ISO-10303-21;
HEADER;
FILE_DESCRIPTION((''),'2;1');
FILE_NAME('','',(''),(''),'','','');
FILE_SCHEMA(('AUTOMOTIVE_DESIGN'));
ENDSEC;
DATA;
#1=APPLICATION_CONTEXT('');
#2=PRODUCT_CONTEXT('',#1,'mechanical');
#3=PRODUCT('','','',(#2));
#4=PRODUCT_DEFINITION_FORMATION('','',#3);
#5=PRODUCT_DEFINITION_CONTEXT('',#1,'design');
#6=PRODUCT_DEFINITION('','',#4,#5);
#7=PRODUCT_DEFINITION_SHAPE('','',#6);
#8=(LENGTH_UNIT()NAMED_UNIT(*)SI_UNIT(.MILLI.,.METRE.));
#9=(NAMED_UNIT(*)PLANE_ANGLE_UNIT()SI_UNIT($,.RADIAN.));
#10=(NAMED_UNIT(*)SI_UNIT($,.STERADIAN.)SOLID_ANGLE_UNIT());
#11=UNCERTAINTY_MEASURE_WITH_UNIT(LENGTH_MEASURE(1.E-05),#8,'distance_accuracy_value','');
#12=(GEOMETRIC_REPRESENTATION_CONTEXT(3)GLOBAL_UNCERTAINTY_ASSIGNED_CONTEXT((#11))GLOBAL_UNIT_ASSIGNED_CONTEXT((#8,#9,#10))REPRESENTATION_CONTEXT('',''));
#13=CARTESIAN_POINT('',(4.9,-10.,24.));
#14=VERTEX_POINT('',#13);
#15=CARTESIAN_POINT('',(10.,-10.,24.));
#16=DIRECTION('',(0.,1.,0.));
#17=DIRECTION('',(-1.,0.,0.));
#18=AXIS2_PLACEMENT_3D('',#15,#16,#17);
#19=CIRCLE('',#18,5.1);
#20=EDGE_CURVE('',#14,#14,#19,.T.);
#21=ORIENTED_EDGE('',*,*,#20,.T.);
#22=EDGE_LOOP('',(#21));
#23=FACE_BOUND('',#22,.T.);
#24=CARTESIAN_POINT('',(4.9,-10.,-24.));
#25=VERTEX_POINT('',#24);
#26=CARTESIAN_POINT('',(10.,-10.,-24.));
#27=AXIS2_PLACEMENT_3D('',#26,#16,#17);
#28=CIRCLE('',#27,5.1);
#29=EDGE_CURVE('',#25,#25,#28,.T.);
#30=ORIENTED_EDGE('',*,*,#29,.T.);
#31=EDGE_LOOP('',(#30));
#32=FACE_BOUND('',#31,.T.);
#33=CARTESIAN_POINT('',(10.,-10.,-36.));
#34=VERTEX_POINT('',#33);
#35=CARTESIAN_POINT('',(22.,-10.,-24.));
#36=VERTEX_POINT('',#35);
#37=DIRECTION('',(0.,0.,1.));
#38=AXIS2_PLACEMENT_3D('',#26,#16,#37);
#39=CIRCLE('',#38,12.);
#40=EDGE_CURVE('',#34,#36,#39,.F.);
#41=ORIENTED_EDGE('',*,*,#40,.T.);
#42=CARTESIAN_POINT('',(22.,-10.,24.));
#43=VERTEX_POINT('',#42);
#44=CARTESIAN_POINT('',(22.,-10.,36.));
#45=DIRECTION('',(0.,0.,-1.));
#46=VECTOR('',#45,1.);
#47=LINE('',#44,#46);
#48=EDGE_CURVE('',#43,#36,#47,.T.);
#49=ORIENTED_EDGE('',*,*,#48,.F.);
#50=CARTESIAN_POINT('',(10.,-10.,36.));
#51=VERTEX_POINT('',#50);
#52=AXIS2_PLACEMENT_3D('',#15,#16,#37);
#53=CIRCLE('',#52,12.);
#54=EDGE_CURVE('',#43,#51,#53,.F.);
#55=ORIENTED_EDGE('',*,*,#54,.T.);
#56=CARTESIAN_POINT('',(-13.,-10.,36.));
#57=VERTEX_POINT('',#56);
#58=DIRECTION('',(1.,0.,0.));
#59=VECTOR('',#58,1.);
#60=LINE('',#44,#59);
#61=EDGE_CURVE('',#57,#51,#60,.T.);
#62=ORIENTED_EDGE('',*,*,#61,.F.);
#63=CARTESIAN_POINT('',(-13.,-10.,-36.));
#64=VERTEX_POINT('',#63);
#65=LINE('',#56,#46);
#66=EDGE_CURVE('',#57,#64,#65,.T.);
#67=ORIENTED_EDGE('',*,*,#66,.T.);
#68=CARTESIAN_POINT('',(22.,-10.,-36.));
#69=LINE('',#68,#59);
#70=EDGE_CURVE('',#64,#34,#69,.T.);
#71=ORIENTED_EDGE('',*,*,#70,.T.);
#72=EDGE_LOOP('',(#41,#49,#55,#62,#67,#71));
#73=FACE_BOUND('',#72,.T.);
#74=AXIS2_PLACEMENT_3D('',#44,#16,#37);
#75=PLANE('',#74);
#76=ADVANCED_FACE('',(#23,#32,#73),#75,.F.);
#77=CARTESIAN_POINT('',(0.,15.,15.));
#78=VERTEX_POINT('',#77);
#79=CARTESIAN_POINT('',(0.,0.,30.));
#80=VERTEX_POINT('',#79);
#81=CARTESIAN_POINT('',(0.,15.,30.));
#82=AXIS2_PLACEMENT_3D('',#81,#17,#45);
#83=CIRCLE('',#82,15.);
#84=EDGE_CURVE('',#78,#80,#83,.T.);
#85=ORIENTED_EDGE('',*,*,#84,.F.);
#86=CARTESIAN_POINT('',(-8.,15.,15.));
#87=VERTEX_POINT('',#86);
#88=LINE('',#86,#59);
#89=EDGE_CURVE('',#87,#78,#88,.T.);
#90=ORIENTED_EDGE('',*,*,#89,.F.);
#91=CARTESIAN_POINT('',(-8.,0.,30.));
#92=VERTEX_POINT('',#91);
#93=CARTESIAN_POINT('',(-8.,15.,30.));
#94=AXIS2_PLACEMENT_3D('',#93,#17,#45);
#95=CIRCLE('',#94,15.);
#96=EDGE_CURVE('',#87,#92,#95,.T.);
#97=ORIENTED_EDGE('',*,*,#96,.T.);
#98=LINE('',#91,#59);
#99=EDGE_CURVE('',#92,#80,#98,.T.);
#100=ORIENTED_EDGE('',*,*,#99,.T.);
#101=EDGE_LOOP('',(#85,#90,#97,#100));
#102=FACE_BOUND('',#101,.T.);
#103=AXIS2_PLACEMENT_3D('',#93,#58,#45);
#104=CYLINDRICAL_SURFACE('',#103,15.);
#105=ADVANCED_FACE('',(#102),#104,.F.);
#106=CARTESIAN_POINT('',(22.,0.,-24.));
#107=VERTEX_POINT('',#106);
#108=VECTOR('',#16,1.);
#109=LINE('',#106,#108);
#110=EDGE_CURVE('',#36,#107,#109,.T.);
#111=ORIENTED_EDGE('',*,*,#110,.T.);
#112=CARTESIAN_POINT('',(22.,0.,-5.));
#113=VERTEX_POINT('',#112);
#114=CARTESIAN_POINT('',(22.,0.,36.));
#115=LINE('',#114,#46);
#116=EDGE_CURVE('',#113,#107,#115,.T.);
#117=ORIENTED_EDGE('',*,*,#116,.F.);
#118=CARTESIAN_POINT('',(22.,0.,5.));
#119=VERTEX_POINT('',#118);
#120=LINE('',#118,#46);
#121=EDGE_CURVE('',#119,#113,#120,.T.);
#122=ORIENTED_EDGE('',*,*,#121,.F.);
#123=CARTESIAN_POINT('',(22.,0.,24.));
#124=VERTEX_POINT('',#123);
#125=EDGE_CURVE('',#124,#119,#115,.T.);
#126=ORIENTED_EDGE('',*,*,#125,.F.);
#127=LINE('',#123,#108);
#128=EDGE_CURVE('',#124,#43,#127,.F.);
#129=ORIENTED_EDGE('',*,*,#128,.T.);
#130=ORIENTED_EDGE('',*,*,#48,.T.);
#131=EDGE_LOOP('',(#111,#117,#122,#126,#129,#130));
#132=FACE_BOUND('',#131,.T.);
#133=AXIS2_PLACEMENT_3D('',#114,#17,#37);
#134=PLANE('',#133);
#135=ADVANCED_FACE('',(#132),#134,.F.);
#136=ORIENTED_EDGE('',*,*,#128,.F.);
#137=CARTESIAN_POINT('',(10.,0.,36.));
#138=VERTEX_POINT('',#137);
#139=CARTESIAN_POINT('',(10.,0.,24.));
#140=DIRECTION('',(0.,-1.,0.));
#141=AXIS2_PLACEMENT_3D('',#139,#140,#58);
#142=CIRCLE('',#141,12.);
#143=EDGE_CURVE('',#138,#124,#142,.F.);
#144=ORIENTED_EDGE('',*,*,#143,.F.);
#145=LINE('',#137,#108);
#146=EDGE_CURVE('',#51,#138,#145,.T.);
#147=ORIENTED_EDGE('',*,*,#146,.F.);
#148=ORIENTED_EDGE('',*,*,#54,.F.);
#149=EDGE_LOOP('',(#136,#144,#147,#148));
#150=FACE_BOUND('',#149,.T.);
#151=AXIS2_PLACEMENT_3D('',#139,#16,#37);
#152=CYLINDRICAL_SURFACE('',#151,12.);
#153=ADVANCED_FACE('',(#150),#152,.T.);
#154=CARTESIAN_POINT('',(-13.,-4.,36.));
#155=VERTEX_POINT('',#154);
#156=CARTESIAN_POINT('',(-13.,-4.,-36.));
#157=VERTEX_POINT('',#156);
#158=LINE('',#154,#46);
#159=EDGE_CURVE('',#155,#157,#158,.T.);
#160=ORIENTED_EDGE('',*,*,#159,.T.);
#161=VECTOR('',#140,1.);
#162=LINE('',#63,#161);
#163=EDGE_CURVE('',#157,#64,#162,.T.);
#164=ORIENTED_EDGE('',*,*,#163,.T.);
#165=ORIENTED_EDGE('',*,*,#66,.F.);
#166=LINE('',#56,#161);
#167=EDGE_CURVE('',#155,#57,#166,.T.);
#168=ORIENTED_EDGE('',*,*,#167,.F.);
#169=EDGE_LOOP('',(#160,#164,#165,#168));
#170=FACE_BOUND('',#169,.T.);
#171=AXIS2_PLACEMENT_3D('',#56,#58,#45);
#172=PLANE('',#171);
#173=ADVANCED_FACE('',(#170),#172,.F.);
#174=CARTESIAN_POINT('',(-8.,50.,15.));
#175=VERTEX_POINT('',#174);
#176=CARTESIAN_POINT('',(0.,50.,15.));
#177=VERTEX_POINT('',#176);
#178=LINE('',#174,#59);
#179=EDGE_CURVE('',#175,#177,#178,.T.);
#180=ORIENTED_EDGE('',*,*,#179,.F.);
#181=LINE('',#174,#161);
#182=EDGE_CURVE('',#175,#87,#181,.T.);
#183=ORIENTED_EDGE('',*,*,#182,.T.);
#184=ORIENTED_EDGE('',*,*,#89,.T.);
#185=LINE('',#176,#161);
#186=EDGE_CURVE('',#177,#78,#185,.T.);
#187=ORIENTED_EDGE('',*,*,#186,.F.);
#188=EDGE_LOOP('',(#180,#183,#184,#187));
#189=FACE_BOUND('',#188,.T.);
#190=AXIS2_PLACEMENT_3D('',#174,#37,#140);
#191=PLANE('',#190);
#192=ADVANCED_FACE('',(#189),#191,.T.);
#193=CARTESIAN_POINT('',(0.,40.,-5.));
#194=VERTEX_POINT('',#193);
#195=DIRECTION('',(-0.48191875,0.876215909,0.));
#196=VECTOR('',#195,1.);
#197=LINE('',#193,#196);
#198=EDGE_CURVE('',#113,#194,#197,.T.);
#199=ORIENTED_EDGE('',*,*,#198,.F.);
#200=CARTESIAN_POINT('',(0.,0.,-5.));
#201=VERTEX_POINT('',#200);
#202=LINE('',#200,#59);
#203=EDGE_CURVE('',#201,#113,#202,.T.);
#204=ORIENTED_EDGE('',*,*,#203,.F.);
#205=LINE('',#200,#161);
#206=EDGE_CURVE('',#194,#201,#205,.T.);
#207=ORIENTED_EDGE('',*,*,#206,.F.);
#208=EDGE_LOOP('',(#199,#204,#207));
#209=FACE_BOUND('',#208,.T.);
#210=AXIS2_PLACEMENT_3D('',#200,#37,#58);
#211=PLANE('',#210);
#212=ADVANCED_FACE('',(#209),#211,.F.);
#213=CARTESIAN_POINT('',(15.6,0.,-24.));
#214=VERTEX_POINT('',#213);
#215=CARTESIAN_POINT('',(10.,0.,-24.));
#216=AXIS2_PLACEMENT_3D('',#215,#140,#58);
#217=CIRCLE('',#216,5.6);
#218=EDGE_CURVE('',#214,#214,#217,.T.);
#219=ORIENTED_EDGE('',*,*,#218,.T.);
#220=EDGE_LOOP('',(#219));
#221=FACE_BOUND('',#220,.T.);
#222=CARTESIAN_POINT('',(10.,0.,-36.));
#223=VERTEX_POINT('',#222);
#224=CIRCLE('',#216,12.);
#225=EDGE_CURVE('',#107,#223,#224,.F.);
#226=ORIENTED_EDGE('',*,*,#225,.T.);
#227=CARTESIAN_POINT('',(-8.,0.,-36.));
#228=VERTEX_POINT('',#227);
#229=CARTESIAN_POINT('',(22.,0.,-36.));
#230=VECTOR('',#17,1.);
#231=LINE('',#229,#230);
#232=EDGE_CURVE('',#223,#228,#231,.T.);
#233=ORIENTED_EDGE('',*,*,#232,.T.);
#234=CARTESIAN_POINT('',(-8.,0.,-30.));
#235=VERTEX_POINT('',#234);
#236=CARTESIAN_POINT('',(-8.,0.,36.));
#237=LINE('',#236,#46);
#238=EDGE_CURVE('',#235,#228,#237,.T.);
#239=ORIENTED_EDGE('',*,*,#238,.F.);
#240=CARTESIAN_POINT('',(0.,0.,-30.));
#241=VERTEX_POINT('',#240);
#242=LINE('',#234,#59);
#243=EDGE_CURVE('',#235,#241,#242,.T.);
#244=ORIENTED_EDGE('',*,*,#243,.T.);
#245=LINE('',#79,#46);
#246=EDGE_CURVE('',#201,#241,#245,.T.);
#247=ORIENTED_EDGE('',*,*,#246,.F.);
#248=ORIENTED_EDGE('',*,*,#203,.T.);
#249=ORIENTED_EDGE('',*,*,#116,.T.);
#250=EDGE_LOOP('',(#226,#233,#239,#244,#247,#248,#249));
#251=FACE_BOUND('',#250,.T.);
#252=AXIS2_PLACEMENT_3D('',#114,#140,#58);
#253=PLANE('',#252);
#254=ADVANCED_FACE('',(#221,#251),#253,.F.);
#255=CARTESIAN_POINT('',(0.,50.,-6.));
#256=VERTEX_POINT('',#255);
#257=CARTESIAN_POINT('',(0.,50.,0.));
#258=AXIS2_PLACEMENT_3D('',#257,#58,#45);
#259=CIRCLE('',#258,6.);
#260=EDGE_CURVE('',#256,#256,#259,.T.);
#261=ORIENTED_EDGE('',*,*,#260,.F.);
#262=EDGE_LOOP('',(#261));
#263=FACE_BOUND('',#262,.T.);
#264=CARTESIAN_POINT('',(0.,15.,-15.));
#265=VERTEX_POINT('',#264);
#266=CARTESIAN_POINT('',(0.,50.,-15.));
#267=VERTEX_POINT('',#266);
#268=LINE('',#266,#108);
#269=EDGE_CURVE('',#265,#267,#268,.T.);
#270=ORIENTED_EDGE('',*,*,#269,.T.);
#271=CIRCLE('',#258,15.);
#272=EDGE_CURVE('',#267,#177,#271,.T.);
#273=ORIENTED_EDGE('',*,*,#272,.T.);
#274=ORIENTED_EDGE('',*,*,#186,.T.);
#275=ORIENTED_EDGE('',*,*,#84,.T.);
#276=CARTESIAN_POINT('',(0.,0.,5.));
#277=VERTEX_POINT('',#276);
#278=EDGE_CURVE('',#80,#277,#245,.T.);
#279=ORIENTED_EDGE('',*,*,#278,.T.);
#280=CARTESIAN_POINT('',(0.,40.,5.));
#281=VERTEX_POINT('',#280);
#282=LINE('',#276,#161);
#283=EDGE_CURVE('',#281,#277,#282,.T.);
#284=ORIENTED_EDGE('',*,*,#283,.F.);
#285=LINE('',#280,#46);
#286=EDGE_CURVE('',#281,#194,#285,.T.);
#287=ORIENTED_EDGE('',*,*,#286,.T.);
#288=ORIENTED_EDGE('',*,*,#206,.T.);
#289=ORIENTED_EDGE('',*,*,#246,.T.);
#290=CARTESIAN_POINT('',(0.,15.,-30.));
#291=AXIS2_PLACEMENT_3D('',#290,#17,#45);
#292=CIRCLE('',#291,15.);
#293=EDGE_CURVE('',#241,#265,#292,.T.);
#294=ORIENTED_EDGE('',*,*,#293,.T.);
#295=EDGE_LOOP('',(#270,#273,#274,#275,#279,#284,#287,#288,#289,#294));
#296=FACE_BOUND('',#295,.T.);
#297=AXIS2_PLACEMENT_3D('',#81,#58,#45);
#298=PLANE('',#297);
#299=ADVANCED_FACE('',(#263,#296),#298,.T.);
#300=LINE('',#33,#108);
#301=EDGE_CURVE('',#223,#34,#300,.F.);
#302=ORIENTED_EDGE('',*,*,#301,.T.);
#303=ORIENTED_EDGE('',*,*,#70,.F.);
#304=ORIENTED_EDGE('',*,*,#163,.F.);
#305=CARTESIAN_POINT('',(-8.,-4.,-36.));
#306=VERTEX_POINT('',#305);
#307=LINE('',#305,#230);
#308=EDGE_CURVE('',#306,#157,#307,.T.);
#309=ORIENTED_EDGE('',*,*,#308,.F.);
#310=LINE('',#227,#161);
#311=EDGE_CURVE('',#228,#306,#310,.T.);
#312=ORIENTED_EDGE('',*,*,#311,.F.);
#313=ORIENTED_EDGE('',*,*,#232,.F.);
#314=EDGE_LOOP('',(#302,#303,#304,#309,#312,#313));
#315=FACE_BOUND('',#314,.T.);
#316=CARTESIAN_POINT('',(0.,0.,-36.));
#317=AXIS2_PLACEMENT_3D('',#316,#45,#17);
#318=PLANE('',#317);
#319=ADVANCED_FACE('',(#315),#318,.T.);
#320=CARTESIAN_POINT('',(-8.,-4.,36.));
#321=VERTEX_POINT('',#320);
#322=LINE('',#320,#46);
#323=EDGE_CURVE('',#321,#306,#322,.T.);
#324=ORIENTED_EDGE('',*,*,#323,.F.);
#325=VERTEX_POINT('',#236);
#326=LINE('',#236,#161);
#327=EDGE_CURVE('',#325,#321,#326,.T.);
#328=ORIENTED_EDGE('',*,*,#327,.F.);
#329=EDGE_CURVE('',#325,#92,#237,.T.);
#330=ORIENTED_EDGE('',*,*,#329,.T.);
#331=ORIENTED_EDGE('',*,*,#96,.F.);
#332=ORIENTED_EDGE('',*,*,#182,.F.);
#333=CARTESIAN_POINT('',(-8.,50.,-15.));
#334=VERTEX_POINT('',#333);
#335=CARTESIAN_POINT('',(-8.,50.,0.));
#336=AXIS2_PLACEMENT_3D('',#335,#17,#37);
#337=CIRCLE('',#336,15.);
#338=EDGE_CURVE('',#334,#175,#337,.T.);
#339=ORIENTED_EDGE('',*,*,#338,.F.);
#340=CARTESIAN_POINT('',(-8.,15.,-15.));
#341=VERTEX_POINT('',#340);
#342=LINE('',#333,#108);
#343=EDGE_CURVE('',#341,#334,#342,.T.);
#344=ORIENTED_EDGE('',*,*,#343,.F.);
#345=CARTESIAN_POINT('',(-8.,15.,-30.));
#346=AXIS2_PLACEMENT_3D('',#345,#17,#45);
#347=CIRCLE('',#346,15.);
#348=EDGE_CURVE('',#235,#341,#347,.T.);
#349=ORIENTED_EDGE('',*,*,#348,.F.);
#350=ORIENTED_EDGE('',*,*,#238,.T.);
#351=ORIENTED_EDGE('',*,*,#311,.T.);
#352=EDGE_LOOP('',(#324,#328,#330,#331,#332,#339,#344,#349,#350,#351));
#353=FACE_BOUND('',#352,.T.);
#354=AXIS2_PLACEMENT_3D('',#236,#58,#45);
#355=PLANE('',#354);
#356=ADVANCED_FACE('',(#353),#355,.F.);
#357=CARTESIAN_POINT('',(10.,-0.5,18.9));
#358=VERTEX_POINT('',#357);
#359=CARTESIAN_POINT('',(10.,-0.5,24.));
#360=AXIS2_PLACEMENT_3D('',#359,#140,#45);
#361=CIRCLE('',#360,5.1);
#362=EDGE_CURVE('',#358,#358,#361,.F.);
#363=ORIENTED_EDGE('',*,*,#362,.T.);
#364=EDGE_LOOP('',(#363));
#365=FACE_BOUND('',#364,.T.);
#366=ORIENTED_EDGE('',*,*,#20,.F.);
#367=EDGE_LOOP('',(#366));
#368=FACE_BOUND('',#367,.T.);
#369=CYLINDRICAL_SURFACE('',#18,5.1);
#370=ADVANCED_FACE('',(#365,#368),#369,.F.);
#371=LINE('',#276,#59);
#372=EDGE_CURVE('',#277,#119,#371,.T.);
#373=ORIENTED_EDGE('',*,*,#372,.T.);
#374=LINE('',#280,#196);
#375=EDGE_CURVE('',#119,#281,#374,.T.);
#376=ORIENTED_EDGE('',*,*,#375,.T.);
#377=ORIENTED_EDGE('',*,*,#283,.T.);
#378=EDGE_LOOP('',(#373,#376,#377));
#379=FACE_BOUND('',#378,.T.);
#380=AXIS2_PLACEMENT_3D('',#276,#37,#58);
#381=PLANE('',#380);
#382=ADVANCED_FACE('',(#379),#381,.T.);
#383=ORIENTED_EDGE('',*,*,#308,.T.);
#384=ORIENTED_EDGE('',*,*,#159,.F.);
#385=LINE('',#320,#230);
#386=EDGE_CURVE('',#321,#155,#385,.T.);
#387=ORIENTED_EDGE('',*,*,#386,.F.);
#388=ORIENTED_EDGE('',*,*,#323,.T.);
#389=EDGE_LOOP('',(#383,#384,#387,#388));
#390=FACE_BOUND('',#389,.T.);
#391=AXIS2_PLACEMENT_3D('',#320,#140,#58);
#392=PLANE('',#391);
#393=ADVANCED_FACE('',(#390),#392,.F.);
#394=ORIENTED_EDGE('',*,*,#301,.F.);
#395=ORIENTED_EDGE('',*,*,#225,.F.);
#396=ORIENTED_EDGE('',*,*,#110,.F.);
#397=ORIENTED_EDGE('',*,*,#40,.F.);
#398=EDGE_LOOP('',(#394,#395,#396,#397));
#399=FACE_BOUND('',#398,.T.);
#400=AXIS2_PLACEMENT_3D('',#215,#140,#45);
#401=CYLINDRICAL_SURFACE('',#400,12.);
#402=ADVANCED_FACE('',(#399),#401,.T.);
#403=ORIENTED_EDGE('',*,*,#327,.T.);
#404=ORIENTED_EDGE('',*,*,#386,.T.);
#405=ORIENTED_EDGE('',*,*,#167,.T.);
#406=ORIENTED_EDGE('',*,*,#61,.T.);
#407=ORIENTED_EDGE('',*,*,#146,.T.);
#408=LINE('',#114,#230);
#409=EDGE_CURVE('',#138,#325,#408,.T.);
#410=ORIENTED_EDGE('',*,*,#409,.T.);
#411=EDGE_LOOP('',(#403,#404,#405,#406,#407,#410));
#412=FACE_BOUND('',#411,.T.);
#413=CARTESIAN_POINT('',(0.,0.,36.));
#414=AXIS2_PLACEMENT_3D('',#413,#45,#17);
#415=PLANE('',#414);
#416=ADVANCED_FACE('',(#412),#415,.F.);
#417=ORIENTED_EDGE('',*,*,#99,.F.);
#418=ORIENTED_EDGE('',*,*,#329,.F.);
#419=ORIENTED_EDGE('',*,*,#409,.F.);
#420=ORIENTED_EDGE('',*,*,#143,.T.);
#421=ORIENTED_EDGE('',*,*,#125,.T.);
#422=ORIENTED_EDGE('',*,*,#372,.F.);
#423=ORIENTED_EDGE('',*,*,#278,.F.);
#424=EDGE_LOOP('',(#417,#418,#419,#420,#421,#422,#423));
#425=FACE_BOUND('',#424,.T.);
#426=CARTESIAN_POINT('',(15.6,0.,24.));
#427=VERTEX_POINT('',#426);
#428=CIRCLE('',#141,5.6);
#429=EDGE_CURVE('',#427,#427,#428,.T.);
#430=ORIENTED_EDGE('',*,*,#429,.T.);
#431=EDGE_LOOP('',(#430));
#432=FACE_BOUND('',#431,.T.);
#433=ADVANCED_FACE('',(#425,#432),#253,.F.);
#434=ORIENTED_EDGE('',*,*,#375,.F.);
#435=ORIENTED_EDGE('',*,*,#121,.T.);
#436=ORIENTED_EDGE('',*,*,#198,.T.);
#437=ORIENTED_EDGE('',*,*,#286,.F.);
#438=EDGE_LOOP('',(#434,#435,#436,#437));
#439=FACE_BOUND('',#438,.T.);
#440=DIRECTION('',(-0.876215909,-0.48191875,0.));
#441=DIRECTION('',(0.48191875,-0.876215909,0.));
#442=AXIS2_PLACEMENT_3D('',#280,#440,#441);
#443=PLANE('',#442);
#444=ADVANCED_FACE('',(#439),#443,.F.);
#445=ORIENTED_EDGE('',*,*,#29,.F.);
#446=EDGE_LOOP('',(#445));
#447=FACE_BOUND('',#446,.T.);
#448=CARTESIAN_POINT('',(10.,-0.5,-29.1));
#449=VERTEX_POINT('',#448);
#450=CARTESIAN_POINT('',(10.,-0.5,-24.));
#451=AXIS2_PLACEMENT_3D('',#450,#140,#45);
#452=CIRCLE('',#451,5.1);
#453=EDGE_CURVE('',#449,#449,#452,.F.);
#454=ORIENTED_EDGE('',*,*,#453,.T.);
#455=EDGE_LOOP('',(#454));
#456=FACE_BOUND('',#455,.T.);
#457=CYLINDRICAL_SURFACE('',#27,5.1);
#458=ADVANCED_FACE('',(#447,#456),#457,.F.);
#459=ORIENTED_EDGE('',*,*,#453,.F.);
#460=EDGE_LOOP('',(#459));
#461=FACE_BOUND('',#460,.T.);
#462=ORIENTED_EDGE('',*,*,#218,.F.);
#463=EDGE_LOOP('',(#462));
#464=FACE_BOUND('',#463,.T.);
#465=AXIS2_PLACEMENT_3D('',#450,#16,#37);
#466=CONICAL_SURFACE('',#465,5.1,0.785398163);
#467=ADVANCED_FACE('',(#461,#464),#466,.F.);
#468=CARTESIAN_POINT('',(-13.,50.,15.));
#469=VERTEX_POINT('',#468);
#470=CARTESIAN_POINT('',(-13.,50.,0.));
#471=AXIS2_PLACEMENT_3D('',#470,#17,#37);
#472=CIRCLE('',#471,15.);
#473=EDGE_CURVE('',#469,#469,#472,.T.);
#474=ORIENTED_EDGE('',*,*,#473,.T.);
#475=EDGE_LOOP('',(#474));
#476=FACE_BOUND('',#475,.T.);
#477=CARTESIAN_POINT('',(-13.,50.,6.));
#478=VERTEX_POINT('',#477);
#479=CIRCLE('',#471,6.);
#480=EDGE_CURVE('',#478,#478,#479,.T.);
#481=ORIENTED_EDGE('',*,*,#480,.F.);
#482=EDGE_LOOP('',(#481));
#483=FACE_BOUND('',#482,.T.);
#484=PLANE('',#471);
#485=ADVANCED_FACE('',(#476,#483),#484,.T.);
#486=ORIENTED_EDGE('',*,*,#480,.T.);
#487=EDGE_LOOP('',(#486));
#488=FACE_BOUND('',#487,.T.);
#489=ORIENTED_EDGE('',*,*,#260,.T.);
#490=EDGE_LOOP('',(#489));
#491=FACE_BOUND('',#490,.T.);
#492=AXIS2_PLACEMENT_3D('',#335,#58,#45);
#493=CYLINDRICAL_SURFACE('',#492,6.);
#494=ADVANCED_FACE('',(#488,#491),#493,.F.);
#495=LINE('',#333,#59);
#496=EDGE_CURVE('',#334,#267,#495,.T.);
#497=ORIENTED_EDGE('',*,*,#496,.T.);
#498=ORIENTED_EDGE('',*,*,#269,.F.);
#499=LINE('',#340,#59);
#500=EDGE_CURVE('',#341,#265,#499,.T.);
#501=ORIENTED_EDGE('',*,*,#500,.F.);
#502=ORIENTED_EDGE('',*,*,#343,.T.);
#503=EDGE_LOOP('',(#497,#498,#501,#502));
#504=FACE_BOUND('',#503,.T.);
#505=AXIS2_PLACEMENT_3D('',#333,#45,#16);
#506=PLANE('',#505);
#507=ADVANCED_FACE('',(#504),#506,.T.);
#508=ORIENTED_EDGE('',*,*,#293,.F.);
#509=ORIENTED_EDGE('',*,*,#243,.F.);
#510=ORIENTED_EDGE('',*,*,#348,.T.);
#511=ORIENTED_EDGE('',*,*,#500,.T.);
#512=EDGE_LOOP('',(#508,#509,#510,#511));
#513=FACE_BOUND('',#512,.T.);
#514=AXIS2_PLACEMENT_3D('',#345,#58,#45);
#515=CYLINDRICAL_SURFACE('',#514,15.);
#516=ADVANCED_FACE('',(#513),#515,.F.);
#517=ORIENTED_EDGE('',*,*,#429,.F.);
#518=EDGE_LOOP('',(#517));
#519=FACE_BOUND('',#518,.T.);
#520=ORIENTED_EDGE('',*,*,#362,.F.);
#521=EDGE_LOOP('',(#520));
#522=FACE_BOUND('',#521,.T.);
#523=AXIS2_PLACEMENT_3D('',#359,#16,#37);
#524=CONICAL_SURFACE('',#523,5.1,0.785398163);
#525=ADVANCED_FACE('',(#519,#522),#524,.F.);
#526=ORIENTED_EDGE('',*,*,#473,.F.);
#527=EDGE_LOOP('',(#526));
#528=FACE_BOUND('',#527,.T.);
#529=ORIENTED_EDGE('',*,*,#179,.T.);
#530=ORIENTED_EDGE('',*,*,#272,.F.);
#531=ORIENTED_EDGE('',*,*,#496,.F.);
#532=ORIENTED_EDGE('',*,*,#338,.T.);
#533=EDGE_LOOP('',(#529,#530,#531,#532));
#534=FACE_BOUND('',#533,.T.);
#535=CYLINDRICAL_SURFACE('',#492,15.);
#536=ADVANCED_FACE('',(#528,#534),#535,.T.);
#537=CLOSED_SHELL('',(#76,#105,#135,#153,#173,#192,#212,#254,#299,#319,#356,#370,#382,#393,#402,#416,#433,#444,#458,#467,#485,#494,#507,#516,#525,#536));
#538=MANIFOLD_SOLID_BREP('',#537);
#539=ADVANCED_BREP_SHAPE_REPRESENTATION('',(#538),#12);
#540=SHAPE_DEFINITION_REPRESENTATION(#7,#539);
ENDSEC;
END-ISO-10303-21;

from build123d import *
from build123d.topology import SkipClean

# Parameters (mm, degrees)
BOSS_EXTRUDE3_DEPTH = 5
BOSS_EXTRUDE4_DEPTH = 36
SKETCH5_R           = 6
BOSS_EXTRUDE5_DEPTH = 8
SKETCH6_R           = 15
SKETCH6_R_2         = 6
BOSS_EXTRUDE6_DEPTH = 5
FILLET1_R           = 12
SKETCH8_R           = 5.1
CUT_EXTRUDE1_DEPTH  = 78.491935064
CHAMFER1_SIZE       = 0.5


with BuildPart() as part:
    # Sketch3 → Boss-Extrude3 (new, symmetric)
    with BuildSketch(Plane.XY):
        Polygon((0, 0), (0, 40), (22, 0), align=None)
    extrude(amount=BOSS_EXTRUDE3_DEPTH, both=True)

    # Sketch4 → Boss-Extrude4 (add, symmetric)
    with BuildSketch(Plane.XY):
        Polygon((22, 0), (-8, 0), (-8, -4), (-13, -4), (-13, -10), (22, -10), align=None)
    extrude(amount=BOSS_EXTRUDE4_DEPTH, both=True)

    # Sketch5 → Boss-Extrude5 (add)
    with BuildSketch(Plane(origin=(0, 0, 0), x_dir=(0, 0, -1), z_dir=(1, 0, 0))):
        with BuildLine():
            Line((-30, 0), (30, 0))
            ThreePointArc((30, 0), (19.393398282, 4.393398282), (15, 15))
            Line((15, 15), (15, 50))
            ThreePointArc((15, 50), (0, 65), (-15, 50))
            Line((-15, 50), (-15, 15))
            ThreePointArc((-15, 15), (-19.393398282, 4.393398282), (-30, 0))
        make_face()
        with Locations((0, 50)):
            Circle(SKETCH5_R, mode=Mode.SUBTRACT)
    extrude(amount=-BOSS_EXTRUDE5_DEPTH)

    # Sketch6 → Boss-Extrude6 (add)
    with SkipClean():  # the faces are left unmerged after this step: merging them gives an invalid solid
        with BuildSketch(Plane.ZY.offset(8)):
            with Locations((0, 50)):
                Circle(SKETCH6_R)
            with Locations((0, 50)):
                Circle(SKETCH6_R_2, mode=Mode.SUBTRACT)
        extrude(amount=BOSS_EXTRUDE6_DEPTH)
    add(part.part.scale(1), mode=Mode.REPLACE)  # the faces are merged on a copy

    # Fillet1
    fillet1_edges = [part.edges().sort_by_distance(p)[0] for p in [
        (22, -5, 36),
        (22, -5, -36),
    ]]
    fillet(fillet1_edges, radius=FILLET1_R)

    # Sketch8 → Cut-Extrude1 (cut, through all)
    with SkipClean():  # the faces are left unmerged after this step: merging them gives an invalid solid
        with BuildSketch(Plane(origin=(0, 0, 0), x_dir=(1, 0, 0), z_dir=(0, 1, 0))):
            with Locations((10, 24)):
                Circle(SKETCH8_R)
            with Locations((10, -24)):
                Circle(SKETCH8_R)
        extrude(amount=-CUT_EXTRUDE1_DEPTH, mode=Mode.SUBTRACT)

    # Chamfer1
    chamfer1_edges = [part.edges().sort_by_distance(p)[0] for p in [
        (4.9, 0, -24),
        (4.9, 0, 24),
    ]]
    chamfer(chamfer1_edges, length=CHAMFER1_SIZE)


solid = part.part
